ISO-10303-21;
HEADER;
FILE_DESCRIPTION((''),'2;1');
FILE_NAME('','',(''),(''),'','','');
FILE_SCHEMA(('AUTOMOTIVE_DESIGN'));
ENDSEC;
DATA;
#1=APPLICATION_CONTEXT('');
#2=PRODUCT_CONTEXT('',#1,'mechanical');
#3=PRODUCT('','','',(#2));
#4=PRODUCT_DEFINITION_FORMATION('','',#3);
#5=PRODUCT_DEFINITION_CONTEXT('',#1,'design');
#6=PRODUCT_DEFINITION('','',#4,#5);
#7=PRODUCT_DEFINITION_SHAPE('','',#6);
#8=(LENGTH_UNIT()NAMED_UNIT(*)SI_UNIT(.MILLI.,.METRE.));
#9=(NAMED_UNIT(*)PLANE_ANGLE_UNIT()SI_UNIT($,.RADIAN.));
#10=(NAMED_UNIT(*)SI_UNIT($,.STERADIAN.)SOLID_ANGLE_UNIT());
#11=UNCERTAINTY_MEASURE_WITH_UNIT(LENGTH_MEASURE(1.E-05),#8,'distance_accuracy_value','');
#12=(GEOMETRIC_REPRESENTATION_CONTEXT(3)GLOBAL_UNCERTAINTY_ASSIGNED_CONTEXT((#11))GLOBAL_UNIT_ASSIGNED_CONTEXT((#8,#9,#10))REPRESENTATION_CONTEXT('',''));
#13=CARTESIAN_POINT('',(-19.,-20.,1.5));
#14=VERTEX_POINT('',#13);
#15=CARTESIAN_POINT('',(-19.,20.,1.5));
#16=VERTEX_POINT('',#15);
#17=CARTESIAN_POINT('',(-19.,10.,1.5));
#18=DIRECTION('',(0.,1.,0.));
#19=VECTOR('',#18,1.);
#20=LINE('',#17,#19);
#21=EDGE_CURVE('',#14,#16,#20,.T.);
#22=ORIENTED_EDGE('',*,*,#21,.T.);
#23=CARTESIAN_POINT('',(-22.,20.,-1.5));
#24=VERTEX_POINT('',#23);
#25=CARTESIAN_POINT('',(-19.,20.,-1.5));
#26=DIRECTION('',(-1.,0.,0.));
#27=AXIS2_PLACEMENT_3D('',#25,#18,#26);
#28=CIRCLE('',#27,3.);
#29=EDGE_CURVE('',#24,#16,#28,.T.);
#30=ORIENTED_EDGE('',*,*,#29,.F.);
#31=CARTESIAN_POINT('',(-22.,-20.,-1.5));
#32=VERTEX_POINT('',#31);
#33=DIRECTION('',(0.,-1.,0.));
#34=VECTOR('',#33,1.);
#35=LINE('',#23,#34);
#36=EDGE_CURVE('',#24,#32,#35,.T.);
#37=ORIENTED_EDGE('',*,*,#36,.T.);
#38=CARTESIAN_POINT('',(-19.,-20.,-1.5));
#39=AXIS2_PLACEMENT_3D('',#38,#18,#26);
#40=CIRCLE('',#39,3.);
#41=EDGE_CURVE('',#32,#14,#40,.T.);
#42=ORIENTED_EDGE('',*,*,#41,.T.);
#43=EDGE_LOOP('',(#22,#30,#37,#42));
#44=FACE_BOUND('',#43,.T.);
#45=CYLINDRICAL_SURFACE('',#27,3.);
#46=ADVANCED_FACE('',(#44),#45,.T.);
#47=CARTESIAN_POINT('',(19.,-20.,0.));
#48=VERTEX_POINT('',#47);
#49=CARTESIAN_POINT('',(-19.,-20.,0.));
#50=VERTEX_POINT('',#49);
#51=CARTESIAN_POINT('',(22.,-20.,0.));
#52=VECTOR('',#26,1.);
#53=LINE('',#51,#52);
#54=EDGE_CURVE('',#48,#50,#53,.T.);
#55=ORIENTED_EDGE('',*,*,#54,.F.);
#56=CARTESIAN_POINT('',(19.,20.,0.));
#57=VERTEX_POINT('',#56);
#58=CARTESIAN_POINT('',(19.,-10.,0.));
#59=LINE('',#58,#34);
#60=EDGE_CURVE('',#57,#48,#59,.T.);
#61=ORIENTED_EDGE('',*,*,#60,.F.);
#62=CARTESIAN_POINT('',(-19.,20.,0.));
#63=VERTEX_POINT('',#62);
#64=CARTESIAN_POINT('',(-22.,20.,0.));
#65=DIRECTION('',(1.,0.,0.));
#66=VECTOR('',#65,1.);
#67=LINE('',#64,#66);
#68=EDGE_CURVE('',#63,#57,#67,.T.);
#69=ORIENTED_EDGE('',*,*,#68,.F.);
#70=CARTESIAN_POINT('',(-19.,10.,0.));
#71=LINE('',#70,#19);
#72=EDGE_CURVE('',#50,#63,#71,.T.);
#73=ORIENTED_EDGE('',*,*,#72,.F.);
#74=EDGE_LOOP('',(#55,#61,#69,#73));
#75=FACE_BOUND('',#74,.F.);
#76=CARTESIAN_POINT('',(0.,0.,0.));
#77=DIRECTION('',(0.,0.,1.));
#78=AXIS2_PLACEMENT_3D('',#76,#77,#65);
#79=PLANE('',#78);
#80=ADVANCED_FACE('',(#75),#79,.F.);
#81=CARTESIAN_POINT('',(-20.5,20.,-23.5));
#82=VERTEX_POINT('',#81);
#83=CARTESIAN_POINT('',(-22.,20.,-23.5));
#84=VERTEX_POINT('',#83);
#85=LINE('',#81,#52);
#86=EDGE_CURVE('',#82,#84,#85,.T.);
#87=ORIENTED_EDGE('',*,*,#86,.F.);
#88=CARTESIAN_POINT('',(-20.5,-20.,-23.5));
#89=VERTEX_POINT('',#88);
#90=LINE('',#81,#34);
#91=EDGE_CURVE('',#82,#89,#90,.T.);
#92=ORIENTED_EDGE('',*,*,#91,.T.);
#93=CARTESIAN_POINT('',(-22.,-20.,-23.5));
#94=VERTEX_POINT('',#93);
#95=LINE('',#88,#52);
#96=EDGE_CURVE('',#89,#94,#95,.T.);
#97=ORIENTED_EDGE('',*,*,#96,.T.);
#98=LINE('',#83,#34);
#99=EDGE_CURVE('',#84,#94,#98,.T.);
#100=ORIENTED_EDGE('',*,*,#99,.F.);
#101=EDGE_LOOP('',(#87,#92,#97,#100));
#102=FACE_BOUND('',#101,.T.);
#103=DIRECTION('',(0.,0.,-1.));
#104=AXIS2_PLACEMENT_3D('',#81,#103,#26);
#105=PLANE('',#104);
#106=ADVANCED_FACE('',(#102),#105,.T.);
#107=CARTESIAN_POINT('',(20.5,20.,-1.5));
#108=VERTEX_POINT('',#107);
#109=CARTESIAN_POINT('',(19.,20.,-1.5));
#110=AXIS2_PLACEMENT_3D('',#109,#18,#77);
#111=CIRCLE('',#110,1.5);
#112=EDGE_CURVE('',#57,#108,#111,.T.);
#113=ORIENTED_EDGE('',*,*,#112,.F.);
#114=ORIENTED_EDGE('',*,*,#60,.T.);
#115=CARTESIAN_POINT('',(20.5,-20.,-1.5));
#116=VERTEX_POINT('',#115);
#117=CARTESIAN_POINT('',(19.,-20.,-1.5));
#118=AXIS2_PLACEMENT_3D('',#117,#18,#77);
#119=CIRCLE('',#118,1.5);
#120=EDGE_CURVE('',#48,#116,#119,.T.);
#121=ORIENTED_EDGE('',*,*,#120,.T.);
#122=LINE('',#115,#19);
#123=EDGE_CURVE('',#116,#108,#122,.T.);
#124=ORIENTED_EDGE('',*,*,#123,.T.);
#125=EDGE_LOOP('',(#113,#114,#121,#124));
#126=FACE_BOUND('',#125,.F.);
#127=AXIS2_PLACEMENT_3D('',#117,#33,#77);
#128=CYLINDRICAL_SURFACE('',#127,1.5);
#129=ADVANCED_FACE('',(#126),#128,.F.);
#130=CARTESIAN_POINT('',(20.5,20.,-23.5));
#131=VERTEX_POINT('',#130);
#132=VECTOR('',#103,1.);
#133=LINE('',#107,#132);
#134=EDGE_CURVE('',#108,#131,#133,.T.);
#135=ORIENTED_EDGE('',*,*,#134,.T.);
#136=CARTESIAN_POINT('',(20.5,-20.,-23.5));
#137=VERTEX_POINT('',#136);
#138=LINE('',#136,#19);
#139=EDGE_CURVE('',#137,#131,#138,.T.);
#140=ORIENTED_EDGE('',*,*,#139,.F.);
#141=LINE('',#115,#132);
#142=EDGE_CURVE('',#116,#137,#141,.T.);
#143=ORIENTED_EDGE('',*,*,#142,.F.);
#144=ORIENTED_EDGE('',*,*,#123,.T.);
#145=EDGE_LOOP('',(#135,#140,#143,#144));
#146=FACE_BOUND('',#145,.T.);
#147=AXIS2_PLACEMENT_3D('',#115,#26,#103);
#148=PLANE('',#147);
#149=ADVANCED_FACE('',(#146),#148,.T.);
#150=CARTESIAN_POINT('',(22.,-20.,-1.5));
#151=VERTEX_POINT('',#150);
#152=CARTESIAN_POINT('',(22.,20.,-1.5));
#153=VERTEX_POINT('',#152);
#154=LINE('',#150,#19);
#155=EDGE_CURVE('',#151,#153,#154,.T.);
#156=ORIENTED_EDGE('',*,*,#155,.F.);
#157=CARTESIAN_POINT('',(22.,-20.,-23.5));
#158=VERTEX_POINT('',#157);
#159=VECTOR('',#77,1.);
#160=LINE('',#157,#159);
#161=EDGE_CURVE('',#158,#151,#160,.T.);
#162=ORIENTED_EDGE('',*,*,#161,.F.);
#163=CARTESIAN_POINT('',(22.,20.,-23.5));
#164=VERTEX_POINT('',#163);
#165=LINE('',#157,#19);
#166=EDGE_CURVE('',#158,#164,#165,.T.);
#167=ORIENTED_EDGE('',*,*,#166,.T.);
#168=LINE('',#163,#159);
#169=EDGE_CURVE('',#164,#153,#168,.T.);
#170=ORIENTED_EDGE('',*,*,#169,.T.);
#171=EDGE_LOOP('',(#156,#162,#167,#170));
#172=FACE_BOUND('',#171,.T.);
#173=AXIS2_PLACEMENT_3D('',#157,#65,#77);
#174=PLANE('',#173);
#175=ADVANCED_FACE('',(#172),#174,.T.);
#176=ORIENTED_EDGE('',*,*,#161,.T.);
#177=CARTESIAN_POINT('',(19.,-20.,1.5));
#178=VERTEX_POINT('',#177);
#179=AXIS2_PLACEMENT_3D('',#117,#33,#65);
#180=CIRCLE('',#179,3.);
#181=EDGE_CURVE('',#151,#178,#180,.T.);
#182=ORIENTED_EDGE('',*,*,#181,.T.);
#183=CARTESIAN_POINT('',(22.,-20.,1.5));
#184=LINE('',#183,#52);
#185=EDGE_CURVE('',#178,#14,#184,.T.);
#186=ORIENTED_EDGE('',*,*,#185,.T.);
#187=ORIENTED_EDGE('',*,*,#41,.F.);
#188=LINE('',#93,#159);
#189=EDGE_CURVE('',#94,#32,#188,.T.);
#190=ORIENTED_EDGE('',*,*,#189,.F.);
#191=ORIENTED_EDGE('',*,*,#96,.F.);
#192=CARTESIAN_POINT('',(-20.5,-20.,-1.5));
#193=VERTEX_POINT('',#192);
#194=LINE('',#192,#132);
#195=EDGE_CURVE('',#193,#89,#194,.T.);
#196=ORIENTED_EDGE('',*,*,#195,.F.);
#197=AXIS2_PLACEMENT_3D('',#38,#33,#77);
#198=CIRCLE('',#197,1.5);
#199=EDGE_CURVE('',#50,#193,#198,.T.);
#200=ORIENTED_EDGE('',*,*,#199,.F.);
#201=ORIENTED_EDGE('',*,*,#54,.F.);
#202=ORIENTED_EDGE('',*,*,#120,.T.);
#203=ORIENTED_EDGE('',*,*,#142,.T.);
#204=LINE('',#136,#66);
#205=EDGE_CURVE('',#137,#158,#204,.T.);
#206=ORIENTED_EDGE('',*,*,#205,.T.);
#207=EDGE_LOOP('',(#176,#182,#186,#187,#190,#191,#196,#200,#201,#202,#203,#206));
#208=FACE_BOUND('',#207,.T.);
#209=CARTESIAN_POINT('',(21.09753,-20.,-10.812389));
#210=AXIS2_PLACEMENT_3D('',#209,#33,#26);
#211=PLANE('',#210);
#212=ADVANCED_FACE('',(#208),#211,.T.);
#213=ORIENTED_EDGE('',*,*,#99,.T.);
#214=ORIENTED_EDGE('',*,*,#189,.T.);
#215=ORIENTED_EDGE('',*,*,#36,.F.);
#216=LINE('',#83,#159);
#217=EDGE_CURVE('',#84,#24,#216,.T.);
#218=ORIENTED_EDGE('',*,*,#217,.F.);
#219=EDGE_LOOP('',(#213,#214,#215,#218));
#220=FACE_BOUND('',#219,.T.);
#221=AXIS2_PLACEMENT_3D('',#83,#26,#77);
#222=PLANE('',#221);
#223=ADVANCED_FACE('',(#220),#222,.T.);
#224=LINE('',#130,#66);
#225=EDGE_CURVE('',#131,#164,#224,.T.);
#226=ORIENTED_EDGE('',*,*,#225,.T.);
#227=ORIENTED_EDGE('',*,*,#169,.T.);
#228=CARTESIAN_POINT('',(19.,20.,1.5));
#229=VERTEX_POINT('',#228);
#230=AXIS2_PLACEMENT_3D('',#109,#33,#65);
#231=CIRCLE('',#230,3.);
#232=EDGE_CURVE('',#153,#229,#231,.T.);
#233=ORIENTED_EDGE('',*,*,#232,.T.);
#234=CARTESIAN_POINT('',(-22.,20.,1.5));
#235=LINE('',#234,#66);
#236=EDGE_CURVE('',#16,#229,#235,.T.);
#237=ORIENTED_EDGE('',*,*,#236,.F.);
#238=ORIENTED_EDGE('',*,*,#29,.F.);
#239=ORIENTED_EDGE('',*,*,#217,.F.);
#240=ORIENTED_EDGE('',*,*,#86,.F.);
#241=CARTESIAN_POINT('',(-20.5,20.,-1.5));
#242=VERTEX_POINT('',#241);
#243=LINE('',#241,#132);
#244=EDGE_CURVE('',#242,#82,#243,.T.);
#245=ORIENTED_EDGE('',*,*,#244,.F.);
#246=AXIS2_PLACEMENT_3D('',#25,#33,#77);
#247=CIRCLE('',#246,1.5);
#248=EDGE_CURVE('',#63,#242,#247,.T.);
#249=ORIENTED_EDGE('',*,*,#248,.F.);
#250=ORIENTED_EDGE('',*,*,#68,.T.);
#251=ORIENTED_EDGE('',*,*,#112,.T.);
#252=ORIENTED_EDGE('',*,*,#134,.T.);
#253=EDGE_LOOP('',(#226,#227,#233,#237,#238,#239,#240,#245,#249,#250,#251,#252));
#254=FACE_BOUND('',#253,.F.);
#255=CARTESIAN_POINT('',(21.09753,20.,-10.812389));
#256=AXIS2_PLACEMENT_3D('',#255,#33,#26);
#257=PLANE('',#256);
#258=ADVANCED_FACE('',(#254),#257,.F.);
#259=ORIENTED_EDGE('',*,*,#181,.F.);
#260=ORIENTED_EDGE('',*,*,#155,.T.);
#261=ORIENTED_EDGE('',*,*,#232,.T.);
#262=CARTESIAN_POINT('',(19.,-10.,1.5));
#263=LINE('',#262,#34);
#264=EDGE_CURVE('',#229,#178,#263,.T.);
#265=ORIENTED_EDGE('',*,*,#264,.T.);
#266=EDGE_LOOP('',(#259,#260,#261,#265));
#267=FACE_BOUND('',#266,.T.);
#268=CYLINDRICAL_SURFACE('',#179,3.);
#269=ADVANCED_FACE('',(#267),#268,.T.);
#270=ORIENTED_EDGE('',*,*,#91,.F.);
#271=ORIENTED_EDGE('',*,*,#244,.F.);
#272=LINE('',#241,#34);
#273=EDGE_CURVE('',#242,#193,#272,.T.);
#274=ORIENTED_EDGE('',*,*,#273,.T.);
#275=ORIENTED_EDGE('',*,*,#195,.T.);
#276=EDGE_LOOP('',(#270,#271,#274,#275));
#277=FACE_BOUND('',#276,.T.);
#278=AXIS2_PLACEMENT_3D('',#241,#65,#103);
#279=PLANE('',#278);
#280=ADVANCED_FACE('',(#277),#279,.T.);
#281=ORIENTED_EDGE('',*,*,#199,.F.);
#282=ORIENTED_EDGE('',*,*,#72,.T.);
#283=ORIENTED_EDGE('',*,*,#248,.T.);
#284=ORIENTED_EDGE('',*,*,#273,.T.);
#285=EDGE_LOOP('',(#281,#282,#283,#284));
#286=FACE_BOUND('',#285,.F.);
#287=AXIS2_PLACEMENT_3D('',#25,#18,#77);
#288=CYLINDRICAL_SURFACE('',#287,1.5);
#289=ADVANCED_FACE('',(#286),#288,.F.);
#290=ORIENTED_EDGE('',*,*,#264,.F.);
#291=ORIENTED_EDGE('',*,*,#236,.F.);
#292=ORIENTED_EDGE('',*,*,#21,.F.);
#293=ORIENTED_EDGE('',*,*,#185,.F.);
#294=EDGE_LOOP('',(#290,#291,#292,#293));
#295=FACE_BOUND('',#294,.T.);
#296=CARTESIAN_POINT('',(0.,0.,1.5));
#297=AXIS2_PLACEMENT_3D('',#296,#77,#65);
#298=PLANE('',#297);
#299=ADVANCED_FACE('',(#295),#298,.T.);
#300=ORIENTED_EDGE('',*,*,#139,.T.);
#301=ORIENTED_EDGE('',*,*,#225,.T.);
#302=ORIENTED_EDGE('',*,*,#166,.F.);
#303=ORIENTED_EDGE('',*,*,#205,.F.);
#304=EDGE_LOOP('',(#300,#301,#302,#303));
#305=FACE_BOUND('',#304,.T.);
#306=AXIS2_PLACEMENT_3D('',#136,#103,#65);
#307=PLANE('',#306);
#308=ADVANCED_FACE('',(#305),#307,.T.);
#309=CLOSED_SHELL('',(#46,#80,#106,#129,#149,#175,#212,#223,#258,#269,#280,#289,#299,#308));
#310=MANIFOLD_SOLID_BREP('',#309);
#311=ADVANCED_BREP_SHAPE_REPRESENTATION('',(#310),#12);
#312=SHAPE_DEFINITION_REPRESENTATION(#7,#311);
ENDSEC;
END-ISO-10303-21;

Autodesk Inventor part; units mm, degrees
ref_plane "YZ Plane" through (0, 0, 0) normal (1, 0, 0) x (0, 1, 0)
ref_plane "XZ Plane" through (0, 0, 0) normal (0, 1, 0) x (-1, 0, 0)
ref_plane "XY Plane" through (0, 0, 0) normal (0, 0, 1) x (1, 0, 0)
sketch "スケッチ1" plane through (0, 0, 0) normal (0, 0, 1) x (1, 0, 0)
  line L0 (-22, 20) -> (22, 20)
  line L1 (22, 20) -> (22, -20)
  line L2 (22, -20) -> (-22, -20)
  line L3 (-22, -20) -> (-22, 20)
  line L4 (-22, 20) -> (22, -20) construction
  line L5 (22, 20) -> (-22, -20) construction
  point P0 (0, 0)
  point P1 (0, 0)
  dimension "d0" = 44
  dimension "d1" = 40
extrude "プレート1" add sketch "スケッチ1" along normal blind 1.5
sketch "スケッチ2" plane through (20.5, -20, 1.5) normal (1, 0, 0) x (0, 1, 0)
  line L0 (40, 0) -> (0, 0)
  line L1 (0, 0) -> (0, -25)
  line L2 (0, -25) -> (40, -25)
  line L3 (40, -25) -> (40, 0)
edge flange "フランジ1" height 25 angle 90 thickness 1.5 bend radius 1.5 thickness toward (1, 0, 0) relief tear relief width 1.5 relief depth 0.75 corner gap 1.5 corner form 0 edges at (22, 0, 0) (-22, 0, 0) wall of the first edge with corners at (20.5, 20, 1.5) (20.5, -20, 1.5) (20.5, -20, -23.5) (20.5, 20, -23.5)
bend "曲げ1"
corner "コーナー1"
equation "\"BendRadius\" = Thickness"
equation "\"BendReliefWidth\" = Thickness"
equation "\"BendReliefDepth\" = 0.5 * Thickness"
equation "\"CornerReliefSize\" = 4 * Thickness"
equation "\"MinimumRemnant\" = 2 * Thickness"
equation "\"TransitionRadius\" = BendRadius"
equation "\"JacobiRadiusSize\" = BendRadius"
equation "\"GapSize\" = Thickness"
properties part number "chest_cover_board_top"
